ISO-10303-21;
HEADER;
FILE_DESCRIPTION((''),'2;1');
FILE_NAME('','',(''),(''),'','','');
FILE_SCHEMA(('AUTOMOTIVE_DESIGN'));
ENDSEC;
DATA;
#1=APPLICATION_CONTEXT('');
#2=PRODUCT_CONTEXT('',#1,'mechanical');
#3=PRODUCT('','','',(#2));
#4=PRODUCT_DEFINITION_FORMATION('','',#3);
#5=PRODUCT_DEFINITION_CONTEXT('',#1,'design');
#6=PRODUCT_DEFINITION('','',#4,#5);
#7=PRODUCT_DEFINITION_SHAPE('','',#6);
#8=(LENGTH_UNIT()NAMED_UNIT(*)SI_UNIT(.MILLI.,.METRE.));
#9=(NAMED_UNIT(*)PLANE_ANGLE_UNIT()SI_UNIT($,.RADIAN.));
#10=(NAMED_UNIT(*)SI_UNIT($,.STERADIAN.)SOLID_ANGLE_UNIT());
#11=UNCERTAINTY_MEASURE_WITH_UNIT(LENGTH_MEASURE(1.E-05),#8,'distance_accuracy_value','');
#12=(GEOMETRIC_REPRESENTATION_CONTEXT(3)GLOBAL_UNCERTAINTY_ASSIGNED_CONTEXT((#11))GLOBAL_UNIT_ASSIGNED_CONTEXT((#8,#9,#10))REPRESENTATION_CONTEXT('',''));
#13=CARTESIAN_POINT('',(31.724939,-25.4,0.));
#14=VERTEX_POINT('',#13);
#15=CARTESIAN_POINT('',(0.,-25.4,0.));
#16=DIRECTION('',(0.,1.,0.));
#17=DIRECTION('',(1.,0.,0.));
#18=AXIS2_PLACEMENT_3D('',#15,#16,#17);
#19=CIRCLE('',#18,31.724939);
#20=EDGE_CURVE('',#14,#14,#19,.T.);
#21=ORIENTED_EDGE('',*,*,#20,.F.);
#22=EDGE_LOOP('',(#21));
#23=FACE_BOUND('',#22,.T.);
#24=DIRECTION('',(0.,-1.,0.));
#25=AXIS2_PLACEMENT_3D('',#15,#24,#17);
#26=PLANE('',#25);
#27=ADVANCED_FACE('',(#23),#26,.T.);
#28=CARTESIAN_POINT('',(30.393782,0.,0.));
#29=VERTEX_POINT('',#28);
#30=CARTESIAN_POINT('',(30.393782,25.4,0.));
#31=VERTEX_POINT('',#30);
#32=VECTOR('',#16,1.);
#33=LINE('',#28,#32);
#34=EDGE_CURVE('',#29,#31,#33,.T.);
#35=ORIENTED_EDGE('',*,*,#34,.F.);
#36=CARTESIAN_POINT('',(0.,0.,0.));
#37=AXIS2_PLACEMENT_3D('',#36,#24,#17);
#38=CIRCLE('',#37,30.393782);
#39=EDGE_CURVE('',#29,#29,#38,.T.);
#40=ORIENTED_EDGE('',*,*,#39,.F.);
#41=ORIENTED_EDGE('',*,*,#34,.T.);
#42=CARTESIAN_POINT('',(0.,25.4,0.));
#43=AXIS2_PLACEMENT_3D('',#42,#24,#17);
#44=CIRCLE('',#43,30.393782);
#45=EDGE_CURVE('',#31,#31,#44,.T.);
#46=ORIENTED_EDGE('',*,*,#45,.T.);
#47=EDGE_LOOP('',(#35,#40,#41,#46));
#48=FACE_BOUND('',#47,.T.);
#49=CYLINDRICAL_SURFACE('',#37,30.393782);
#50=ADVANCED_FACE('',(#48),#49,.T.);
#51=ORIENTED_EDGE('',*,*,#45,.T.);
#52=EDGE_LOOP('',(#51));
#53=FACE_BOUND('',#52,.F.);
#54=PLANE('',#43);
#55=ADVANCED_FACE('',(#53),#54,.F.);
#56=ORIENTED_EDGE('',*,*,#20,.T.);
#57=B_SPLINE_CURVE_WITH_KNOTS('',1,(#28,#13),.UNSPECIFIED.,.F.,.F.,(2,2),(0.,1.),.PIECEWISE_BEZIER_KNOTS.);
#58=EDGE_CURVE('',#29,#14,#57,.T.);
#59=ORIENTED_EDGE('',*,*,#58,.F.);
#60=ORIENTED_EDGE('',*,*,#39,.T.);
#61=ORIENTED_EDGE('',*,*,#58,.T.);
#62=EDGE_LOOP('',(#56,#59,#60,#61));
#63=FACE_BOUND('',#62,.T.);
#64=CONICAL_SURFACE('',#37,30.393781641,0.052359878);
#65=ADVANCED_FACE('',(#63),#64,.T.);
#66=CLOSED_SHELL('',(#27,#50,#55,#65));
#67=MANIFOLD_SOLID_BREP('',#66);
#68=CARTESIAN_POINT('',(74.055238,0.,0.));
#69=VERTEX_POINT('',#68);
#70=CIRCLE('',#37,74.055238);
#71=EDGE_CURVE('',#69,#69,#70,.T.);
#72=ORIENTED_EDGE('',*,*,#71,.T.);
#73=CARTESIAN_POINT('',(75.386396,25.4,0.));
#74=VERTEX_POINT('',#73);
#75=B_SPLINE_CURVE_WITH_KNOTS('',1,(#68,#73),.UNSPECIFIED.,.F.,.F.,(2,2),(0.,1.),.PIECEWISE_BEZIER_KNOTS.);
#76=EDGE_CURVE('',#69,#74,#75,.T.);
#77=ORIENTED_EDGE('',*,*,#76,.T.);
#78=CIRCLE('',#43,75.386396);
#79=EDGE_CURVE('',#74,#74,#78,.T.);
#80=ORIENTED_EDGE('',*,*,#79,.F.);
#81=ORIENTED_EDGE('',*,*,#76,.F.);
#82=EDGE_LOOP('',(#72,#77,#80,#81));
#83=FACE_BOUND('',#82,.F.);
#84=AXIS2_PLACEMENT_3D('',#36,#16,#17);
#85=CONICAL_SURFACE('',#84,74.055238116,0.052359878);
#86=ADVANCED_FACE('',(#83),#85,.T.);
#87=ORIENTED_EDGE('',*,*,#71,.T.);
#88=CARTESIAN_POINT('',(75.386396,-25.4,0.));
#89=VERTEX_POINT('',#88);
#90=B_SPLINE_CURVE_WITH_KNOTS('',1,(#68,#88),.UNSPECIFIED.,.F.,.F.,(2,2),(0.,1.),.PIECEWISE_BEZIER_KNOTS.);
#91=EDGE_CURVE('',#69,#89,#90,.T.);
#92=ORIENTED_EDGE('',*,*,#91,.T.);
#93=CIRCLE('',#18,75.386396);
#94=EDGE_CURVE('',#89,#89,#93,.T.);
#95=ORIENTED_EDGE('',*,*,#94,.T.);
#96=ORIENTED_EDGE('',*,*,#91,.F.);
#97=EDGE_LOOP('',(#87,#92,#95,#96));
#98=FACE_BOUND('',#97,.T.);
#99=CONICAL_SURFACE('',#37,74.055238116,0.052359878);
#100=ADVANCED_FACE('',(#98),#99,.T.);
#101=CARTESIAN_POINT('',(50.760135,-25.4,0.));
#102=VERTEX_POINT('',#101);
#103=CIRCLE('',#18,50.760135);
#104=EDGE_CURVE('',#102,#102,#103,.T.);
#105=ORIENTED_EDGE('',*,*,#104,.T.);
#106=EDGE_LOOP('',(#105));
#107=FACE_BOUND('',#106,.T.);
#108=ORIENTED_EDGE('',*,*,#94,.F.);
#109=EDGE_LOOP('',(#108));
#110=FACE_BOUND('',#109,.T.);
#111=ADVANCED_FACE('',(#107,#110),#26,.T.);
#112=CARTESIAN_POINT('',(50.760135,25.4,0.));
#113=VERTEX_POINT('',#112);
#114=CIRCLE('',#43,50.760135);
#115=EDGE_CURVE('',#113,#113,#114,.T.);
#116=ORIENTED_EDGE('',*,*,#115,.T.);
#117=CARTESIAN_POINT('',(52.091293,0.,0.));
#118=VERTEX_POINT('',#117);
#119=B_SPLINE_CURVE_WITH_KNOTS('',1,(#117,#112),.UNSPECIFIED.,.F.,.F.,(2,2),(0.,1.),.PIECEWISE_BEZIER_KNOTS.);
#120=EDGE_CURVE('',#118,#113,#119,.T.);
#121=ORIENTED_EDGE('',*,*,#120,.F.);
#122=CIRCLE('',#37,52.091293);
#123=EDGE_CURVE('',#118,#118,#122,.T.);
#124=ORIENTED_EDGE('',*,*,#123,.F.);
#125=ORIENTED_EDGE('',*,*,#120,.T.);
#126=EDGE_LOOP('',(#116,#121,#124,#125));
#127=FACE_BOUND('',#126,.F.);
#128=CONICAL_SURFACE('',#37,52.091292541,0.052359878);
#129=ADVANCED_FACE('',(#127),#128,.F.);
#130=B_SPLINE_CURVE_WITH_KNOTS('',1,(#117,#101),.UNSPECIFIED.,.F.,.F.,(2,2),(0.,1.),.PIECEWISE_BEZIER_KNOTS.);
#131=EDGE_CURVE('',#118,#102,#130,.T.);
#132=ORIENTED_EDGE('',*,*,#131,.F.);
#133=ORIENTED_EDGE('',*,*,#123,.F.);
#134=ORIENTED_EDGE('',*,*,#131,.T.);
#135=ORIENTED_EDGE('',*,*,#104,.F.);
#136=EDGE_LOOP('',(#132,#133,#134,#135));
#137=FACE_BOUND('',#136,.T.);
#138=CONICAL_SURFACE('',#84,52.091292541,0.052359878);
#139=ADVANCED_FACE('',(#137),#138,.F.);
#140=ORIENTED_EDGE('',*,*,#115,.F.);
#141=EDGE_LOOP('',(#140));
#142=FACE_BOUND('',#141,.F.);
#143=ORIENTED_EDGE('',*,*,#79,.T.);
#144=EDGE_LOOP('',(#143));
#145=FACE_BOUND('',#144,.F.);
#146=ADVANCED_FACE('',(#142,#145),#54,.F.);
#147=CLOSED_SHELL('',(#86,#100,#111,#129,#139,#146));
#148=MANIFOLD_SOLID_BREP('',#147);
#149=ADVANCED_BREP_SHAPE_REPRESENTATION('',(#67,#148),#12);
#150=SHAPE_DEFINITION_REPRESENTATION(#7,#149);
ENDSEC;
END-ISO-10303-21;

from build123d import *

# Parameters (mm, degrees)
F0_R          = 74.0552381164
F0_R_2        = 52.091292541
F1_DEPTH      = 25.4
F1_TAPER      = -3
F1_DEPTH_BACK = 25.4
F1_TAPER_BACK = -3
F4_R          = 30.393781641
F5_DEPTH      = 25.4
F5_TAPER      = -3
F5_DEPTH_BACK = 25.4


# Not quite as in the source:
# - the program builds the solid bodies; features that only make, move or delete a surface that nothing else refers to are left out


with BuildPart() as f1:
    # F0 (on Front) → F1 (new body, two sides)
    with BuildSketch(Plane.XZ) as f1_sk:
        Circle(F0_R)
        Circle(F0_R_2, mode=Mode.SUBTRACT)
    extrude(amount=F1_DEPTH, taper=F1_TAPER)
    extrude(f1_sk.sketch, amount=-F1_DEPTH_BACK, taper=F1_TAPER_BACK)


with BuildPart() as f5:
    # F4 (on Front) → F5 (new body, two sides)
    with BuildSketch(Plane.XZ) as f5_sk:
        Circle(F4_R)
    extrude(amount=F5_DEPTH, taper=F5_TAPER)
    extrude(f5_sk.sketch, amount=-F5_DEPTH_BACK)


solid = Compound([f1.part, f5.part])
